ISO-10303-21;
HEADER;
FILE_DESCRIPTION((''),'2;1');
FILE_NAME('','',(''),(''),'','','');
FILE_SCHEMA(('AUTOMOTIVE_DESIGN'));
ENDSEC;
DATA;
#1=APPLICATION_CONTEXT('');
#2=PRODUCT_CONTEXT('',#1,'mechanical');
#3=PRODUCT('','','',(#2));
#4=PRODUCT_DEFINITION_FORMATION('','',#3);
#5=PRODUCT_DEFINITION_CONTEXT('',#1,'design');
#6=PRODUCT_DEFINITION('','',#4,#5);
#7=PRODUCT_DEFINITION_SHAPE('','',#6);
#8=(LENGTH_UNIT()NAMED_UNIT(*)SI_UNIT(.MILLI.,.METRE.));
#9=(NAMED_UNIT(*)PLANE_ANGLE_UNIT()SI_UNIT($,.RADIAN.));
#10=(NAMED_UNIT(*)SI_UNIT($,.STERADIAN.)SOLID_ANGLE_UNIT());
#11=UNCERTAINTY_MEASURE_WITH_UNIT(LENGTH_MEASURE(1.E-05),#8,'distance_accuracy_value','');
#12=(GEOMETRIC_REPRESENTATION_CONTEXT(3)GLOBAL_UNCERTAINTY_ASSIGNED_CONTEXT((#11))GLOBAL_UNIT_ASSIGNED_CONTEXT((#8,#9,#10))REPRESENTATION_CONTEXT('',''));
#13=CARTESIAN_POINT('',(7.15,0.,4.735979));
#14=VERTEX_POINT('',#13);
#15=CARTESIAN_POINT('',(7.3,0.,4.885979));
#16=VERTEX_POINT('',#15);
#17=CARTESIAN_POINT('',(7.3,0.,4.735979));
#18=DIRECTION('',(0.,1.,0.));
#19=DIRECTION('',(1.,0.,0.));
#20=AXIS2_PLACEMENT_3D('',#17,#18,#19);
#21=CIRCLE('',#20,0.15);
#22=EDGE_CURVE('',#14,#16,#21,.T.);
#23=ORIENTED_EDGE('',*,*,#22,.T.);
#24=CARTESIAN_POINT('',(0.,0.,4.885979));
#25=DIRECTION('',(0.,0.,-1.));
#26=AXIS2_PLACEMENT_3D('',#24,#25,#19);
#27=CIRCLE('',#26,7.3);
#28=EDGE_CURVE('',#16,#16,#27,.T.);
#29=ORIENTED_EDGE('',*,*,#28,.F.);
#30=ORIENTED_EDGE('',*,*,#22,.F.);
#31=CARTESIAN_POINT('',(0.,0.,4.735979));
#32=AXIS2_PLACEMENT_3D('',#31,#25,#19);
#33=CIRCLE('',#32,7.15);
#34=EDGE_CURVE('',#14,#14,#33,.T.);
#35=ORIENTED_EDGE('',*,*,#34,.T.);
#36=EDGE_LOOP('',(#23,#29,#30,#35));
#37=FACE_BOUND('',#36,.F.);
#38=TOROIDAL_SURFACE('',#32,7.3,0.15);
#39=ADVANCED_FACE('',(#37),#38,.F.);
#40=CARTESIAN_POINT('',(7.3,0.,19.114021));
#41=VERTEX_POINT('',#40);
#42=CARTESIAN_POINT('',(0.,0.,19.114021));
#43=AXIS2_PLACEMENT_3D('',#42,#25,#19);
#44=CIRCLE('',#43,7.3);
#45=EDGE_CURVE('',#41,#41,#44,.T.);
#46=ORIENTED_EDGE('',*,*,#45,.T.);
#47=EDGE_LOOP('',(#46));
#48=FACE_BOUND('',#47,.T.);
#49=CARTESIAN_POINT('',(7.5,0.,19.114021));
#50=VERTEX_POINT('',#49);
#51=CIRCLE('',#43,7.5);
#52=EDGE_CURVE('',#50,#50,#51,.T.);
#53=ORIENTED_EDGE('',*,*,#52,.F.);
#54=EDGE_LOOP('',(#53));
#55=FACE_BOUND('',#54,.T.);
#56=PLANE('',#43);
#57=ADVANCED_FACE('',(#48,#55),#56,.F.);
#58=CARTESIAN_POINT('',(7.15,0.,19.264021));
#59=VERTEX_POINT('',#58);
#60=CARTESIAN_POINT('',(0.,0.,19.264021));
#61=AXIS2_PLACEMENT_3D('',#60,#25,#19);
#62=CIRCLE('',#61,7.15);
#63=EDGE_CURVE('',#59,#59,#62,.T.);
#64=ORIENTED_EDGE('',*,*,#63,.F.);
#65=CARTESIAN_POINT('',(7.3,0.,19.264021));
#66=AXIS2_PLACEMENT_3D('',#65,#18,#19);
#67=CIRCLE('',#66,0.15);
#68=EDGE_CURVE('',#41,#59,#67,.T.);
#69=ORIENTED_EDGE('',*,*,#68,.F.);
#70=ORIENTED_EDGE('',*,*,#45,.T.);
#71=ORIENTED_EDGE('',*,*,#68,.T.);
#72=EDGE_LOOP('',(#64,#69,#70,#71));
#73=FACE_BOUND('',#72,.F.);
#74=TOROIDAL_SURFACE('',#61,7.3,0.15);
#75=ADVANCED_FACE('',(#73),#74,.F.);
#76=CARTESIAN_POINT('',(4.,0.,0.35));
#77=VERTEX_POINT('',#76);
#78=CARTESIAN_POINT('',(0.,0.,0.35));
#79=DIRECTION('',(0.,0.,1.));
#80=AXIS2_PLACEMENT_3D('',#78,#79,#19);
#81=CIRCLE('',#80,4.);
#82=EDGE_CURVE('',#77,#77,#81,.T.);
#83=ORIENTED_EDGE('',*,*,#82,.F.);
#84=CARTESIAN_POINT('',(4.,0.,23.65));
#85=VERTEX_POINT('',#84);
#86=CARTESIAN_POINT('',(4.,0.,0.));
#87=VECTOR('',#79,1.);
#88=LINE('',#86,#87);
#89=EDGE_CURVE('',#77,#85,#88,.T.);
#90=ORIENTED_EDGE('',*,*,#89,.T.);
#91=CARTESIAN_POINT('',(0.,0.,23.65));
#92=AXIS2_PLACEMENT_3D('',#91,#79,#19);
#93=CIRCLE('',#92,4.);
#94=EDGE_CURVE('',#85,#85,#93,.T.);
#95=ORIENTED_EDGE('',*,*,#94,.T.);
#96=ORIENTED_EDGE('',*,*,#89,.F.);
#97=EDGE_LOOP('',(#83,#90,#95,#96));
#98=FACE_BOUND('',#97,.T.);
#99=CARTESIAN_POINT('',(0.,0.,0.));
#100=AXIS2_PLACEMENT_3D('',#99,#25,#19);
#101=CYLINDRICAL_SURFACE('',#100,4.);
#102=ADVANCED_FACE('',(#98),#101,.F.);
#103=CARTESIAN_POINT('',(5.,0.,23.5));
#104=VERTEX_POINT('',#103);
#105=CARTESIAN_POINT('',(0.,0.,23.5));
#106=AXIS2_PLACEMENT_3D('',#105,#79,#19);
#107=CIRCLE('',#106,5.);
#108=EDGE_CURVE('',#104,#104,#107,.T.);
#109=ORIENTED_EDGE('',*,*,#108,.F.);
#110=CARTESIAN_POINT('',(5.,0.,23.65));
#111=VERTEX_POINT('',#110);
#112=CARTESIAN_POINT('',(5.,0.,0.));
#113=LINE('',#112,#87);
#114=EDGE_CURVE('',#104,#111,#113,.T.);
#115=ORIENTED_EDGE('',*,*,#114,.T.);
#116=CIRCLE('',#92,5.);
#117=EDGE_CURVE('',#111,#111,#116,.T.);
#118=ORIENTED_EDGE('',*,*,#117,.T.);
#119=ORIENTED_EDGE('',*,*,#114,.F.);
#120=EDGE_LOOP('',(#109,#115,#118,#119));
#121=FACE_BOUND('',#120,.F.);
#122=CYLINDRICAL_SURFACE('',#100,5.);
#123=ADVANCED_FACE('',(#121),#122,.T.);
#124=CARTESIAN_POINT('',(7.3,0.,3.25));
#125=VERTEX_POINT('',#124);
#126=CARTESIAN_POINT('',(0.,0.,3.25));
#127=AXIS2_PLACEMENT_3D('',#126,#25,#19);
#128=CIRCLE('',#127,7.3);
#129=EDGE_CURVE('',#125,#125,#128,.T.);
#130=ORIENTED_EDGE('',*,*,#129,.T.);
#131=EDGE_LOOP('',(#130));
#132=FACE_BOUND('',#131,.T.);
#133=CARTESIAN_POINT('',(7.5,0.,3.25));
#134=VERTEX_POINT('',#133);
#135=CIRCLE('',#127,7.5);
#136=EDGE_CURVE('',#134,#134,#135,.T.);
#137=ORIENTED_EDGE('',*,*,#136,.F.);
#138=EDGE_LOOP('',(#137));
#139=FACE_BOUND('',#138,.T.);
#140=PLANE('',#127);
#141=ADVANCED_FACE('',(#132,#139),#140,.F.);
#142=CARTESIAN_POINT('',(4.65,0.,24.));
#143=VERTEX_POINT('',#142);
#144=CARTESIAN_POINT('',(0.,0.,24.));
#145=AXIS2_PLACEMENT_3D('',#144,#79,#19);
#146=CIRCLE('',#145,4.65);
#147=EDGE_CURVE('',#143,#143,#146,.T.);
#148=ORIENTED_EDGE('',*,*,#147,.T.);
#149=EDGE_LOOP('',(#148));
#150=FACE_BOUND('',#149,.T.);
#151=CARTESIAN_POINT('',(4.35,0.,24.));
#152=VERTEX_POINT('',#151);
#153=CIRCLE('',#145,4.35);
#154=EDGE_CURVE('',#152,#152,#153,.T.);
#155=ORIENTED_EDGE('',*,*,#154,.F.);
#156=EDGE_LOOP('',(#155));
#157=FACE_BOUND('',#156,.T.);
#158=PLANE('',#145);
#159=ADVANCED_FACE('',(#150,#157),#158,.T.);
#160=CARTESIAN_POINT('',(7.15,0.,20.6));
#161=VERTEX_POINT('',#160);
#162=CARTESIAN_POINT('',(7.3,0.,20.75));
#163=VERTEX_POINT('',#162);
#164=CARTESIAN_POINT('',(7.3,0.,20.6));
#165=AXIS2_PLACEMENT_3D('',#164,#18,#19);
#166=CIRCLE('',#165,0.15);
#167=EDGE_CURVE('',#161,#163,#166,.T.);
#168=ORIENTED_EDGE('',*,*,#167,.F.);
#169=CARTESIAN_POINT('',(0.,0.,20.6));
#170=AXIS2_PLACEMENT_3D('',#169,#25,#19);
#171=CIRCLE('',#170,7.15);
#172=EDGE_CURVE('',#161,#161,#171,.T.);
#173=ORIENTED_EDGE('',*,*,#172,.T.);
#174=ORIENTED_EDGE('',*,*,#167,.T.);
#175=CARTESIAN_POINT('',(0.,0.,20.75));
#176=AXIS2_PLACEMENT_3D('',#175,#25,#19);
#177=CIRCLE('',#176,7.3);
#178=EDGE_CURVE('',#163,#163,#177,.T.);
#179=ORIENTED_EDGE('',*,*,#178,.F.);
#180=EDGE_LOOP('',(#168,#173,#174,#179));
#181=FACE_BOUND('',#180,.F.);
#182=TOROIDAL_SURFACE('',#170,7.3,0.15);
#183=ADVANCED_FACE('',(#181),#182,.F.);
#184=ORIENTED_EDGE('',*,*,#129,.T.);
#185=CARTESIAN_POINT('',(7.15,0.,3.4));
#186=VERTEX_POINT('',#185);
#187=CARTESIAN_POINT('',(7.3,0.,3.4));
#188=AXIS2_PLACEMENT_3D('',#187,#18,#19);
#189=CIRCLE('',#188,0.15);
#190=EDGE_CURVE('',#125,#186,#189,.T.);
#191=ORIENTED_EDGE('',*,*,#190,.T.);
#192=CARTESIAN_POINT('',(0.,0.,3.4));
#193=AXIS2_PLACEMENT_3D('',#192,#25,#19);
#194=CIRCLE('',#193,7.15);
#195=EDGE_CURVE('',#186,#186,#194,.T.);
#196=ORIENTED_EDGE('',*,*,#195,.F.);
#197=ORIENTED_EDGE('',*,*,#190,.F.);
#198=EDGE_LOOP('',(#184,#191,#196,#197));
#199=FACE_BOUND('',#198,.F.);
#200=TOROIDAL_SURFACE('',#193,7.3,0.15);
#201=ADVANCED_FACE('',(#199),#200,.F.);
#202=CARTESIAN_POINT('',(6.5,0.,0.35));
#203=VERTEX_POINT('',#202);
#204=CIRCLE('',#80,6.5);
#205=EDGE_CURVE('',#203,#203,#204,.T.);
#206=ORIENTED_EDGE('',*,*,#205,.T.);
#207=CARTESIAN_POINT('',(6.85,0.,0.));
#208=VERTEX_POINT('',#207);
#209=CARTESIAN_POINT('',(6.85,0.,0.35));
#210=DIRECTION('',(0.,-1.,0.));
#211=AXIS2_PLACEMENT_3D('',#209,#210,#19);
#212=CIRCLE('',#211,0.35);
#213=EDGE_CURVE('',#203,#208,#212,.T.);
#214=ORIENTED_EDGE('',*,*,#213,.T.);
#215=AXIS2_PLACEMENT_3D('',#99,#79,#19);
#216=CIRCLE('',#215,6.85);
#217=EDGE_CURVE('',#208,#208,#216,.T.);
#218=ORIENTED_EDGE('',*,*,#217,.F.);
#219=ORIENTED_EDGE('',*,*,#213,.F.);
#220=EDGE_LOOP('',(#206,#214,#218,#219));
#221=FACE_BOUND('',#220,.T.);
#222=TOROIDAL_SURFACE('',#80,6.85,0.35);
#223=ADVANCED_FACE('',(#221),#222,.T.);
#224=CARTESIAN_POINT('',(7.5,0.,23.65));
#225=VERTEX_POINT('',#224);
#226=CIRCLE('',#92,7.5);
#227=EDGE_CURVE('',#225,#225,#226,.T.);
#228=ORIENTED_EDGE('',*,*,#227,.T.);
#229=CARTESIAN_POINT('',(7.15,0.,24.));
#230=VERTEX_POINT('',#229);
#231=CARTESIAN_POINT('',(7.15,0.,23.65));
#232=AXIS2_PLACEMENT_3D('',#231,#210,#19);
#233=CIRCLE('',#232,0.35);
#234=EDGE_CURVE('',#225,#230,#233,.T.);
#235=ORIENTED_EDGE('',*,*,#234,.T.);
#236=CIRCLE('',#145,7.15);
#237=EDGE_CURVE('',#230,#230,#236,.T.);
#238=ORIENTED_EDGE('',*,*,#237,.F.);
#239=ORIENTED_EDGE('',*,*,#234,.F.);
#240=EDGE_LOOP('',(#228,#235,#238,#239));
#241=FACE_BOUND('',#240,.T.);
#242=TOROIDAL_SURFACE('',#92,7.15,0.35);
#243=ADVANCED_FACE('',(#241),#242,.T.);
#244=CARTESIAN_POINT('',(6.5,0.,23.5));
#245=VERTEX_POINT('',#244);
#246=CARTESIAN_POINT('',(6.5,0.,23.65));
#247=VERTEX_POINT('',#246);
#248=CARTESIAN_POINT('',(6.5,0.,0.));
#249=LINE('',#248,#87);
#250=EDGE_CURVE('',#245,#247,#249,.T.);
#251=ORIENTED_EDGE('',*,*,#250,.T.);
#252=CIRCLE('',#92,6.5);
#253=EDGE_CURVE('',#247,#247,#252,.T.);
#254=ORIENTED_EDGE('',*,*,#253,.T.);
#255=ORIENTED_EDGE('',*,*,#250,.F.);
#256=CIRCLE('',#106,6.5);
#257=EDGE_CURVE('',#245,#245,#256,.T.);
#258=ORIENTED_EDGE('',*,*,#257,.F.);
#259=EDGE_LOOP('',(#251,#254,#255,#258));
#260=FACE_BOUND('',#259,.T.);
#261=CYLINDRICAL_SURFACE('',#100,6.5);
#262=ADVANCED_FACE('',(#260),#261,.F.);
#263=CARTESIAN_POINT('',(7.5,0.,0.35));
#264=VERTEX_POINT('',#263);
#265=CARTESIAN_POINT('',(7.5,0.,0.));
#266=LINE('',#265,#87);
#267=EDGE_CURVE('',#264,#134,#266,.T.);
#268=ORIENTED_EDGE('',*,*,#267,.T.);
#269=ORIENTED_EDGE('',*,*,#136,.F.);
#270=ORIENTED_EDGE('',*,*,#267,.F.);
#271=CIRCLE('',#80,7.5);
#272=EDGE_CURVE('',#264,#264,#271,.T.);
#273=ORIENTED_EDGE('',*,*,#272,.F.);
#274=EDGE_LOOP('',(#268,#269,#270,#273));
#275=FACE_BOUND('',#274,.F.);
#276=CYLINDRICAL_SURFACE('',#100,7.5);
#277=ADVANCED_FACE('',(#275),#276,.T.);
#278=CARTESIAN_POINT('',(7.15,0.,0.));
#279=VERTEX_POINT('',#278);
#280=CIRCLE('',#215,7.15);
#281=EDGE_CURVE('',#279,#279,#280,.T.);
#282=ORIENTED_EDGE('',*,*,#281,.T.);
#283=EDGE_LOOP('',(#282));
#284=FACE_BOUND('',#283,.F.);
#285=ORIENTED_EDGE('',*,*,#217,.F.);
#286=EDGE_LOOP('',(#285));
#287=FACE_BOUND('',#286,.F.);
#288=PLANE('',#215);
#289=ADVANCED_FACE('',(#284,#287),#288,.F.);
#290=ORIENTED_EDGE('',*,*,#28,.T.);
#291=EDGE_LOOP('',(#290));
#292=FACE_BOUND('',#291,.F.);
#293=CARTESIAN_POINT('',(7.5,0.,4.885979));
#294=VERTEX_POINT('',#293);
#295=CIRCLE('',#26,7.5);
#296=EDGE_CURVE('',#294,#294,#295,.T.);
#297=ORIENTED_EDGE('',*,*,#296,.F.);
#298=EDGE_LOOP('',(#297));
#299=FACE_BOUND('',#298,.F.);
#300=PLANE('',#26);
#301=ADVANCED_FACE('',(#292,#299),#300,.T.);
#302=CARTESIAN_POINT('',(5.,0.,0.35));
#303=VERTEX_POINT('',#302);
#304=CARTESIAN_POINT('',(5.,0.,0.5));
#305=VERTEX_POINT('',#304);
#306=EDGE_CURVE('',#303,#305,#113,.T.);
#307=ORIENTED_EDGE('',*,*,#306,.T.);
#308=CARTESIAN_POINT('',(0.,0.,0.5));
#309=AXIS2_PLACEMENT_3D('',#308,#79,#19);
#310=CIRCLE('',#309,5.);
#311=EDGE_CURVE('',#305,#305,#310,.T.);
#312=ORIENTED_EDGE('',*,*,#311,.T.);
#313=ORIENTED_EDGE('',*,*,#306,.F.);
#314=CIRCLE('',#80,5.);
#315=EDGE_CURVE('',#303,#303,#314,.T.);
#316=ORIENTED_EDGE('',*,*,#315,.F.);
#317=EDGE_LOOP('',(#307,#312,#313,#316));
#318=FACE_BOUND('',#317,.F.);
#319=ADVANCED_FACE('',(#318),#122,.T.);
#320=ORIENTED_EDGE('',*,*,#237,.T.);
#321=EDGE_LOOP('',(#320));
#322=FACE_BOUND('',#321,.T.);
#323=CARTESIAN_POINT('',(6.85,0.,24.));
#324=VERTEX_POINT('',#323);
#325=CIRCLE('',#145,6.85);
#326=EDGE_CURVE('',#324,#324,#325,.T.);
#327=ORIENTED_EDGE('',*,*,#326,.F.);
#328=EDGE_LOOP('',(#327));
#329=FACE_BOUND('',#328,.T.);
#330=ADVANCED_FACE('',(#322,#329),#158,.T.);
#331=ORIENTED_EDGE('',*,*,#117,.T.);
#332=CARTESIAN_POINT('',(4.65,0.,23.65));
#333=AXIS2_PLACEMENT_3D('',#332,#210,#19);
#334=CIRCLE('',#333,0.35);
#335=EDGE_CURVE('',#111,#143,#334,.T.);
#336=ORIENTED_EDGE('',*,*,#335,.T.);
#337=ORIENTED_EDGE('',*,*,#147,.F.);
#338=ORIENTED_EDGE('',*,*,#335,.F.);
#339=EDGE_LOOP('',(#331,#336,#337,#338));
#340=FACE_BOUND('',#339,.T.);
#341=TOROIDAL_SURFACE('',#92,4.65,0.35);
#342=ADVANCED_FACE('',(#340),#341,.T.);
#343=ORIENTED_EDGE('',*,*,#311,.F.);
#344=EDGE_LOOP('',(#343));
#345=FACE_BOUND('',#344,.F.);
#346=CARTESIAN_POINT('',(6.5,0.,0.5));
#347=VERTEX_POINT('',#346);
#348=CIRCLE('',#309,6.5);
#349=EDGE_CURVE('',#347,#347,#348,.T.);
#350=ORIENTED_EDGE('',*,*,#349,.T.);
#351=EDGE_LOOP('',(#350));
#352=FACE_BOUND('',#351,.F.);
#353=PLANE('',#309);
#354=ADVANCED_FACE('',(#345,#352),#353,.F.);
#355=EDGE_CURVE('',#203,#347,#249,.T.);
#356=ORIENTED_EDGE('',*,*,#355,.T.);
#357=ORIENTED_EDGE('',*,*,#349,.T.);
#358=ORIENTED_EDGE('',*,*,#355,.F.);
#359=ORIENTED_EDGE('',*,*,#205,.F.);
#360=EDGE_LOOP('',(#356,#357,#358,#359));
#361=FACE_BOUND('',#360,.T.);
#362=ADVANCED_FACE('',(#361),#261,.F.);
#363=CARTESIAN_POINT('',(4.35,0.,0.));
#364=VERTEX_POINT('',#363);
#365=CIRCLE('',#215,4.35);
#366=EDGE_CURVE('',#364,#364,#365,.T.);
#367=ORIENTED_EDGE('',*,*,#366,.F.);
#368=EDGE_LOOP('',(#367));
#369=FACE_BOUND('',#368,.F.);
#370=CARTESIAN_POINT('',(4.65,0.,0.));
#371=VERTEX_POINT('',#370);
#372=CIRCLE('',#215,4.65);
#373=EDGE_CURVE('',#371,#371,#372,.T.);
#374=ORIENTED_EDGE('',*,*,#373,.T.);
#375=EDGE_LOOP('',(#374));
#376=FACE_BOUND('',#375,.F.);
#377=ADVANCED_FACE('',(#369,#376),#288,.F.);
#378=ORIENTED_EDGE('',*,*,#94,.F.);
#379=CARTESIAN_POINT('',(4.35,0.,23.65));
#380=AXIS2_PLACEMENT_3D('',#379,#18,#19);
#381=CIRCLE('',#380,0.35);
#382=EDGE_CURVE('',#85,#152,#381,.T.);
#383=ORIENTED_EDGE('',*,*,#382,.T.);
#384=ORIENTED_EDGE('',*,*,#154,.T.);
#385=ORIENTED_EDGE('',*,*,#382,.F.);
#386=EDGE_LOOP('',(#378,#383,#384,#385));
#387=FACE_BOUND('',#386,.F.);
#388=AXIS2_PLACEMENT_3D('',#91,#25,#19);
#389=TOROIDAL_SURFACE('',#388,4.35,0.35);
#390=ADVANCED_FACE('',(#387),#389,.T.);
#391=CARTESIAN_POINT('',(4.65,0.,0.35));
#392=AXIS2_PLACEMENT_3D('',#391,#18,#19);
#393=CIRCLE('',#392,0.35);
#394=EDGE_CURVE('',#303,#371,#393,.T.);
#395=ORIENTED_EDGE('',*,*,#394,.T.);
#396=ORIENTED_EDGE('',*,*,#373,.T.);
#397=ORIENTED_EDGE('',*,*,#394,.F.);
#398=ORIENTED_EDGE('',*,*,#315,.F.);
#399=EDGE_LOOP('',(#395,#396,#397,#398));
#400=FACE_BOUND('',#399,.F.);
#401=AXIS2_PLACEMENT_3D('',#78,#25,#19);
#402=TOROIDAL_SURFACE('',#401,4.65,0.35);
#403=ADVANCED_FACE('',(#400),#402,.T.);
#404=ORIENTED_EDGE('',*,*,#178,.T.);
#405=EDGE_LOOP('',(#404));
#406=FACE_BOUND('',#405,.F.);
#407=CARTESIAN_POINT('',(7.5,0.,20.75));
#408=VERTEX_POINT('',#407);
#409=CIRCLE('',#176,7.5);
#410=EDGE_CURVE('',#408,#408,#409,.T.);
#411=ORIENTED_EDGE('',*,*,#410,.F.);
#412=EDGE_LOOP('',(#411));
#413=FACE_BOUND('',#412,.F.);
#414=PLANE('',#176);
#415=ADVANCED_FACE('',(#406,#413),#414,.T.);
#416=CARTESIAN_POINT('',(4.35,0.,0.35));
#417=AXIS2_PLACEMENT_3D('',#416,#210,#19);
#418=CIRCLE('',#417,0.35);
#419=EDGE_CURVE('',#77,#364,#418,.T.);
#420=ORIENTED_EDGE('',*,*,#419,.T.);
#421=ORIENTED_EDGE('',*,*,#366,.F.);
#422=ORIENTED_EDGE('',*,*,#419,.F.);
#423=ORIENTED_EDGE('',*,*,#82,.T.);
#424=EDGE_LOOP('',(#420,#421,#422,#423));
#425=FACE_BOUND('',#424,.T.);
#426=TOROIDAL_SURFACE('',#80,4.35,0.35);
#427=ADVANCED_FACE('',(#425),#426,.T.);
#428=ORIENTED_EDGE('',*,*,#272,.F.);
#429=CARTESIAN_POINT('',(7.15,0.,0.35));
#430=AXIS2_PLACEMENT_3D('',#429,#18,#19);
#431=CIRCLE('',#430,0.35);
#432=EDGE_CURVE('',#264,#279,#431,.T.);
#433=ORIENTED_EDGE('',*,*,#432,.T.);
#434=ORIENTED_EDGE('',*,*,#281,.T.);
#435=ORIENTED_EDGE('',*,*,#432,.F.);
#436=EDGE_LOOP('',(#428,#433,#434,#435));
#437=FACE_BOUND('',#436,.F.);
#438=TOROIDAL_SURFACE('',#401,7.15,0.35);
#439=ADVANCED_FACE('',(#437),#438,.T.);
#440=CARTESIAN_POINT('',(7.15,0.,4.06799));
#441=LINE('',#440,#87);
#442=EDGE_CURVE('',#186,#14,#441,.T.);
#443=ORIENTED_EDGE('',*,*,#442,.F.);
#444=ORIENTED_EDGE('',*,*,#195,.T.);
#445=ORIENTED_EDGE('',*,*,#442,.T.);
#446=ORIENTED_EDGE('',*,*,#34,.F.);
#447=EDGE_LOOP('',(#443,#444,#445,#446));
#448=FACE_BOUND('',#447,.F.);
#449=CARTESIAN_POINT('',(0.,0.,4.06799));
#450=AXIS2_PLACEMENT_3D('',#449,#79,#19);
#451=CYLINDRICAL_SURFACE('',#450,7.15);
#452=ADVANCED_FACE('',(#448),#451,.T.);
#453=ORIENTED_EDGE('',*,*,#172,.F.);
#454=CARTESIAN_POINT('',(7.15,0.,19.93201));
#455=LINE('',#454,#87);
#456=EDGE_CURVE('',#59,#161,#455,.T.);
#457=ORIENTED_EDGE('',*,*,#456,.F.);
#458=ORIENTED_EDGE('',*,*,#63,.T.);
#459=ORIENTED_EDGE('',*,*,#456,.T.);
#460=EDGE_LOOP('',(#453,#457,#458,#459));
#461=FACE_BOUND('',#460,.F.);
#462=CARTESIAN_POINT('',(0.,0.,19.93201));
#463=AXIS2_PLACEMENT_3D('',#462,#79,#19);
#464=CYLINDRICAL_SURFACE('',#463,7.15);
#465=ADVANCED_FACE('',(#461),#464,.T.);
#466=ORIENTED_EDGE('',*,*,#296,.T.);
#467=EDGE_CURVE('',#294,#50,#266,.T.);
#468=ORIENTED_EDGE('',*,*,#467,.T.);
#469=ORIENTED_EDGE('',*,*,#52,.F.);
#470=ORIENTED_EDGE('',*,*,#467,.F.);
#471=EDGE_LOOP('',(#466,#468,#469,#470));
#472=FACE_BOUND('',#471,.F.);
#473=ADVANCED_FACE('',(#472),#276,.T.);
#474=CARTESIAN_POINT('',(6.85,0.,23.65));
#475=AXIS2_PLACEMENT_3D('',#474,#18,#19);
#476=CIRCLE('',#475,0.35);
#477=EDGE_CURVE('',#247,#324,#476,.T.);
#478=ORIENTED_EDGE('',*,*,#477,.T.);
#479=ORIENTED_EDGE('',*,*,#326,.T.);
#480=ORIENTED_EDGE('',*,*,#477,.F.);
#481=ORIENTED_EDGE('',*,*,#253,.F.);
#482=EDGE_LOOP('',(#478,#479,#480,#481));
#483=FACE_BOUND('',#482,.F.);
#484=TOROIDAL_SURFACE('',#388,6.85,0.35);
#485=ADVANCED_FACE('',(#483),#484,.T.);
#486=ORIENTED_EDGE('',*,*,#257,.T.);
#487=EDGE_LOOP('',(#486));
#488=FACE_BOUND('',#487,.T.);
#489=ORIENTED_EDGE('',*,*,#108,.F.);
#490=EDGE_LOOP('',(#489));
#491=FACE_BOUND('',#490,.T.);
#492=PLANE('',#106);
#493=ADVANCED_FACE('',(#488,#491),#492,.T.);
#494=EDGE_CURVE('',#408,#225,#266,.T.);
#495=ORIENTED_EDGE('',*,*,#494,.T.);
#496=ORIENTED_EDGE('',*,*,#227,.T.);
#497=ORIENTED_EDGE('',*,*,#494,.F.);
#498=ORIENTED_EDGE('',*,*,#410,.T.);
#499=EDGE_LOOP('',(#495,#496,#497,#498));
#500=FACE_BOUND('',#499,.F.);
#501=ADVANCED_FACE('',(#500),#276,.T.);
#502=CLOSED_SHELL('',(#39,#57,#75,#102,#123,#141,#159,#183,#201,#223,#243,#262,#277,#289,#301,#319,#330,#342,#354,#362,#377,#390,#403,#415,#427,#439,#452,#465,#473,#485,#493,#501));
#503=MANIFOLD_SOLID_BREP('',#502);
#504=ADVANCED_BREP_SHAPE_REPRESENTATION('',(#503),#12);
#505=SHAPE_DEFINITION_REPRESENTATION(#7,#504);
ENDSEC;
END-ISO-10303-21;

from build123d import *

# Parameters (mm, degrees)
F1_R     = 7.5
F1_R_2   = 6.5
F2_DEPTH = 24
F3_R     = 5
F3_R_2   = 4
F4_DEPTH = 24
F5_R     = 0.35
F5_2_R   = 0.35
F7_START = 0.5
F6_R     = 6.5
F6_R_2   = 5
F7_DEPTH = 23
F8_W     = 4.3079123679
F8_H     = 1.6359793772
F10_R    = 0.15


with BuildPart() as f2:
    # F1 (on Top) → F2 (new body, through all)
    with BuildSketch(Plane.XY):
        Circle(F1_R)
        Circle(F1_R_2, mode=Mode.SUBTRACT)
    extrude(amount=F2_DEPTH)

    # F5
    f5_edges = [f2.edges().sort_by_distance(p)[0] for p in [
        (-7.5, 0, 24),
        (-7.5, 0, 0),
        (-6.5, 0, 24),
        (-6.5, 0, 0),
    ]]
    fillet(f5_edges, radius=F5_R)



with BuildPart() as f4:
    # F3 (on Top) → F4 (new body, through all)
    with BuildSketch(Plane.XY):
        Circle(F3_R)
        Circle(F3_R_2, mode=Mode.SUBTRACT)
    extrude(amount=F4_DEPTH)

    # F5#2
    f5_2_edges = [f4.edges().sort_by_distance(p)[0] for p in [
        (-5, 0, 0),
        (-4, 0, 0),
        (-5, 0, 24),
        (-4, 0, 24),
    ]]
    fillet(f5_2_edges, radius=F5_2_R)


with BuildPart() as f2_1:
    add(f2.part)

    add(f4.part)  # F7 merges F4
    # F6 (on Top) → F7 (join)
    with BuildSketch(Plane.XY.offset(F7_START)):
        Circle(F6_R)
        Circle(F6_R_2, mode=Mode.SUBTRACT)
    extrude(amount=F7_DEPTH)

    # F8 (on Front) → F9 (revolve, cut)
    with BuildSketch(Plane.XZ):
        with Locations((9.303956184, 19.9320103114)):
            Rectangle(F8_W, F8_H)
        with Locations((9.303956184, 4.0679896886)):
            Rectangle(F8_W, F8_H)
    revolve(axis=Axis((0, 0, 0), (0, 0, -1)), mode=Mode.SUBTRACT)

    # F10
    f10_edges = [f2_1.edges().sort_by_distance(p)[0] for p in [
        (-7.15, 0, 20.75),
        (-7.15, 0, 19.114021),
        (-7.15, 0, 3.25),
        (-7.15, 0, 4.885979),
    ]]
    fillet(f10_edges, radius=F10_R)


solid = f2_1.part
